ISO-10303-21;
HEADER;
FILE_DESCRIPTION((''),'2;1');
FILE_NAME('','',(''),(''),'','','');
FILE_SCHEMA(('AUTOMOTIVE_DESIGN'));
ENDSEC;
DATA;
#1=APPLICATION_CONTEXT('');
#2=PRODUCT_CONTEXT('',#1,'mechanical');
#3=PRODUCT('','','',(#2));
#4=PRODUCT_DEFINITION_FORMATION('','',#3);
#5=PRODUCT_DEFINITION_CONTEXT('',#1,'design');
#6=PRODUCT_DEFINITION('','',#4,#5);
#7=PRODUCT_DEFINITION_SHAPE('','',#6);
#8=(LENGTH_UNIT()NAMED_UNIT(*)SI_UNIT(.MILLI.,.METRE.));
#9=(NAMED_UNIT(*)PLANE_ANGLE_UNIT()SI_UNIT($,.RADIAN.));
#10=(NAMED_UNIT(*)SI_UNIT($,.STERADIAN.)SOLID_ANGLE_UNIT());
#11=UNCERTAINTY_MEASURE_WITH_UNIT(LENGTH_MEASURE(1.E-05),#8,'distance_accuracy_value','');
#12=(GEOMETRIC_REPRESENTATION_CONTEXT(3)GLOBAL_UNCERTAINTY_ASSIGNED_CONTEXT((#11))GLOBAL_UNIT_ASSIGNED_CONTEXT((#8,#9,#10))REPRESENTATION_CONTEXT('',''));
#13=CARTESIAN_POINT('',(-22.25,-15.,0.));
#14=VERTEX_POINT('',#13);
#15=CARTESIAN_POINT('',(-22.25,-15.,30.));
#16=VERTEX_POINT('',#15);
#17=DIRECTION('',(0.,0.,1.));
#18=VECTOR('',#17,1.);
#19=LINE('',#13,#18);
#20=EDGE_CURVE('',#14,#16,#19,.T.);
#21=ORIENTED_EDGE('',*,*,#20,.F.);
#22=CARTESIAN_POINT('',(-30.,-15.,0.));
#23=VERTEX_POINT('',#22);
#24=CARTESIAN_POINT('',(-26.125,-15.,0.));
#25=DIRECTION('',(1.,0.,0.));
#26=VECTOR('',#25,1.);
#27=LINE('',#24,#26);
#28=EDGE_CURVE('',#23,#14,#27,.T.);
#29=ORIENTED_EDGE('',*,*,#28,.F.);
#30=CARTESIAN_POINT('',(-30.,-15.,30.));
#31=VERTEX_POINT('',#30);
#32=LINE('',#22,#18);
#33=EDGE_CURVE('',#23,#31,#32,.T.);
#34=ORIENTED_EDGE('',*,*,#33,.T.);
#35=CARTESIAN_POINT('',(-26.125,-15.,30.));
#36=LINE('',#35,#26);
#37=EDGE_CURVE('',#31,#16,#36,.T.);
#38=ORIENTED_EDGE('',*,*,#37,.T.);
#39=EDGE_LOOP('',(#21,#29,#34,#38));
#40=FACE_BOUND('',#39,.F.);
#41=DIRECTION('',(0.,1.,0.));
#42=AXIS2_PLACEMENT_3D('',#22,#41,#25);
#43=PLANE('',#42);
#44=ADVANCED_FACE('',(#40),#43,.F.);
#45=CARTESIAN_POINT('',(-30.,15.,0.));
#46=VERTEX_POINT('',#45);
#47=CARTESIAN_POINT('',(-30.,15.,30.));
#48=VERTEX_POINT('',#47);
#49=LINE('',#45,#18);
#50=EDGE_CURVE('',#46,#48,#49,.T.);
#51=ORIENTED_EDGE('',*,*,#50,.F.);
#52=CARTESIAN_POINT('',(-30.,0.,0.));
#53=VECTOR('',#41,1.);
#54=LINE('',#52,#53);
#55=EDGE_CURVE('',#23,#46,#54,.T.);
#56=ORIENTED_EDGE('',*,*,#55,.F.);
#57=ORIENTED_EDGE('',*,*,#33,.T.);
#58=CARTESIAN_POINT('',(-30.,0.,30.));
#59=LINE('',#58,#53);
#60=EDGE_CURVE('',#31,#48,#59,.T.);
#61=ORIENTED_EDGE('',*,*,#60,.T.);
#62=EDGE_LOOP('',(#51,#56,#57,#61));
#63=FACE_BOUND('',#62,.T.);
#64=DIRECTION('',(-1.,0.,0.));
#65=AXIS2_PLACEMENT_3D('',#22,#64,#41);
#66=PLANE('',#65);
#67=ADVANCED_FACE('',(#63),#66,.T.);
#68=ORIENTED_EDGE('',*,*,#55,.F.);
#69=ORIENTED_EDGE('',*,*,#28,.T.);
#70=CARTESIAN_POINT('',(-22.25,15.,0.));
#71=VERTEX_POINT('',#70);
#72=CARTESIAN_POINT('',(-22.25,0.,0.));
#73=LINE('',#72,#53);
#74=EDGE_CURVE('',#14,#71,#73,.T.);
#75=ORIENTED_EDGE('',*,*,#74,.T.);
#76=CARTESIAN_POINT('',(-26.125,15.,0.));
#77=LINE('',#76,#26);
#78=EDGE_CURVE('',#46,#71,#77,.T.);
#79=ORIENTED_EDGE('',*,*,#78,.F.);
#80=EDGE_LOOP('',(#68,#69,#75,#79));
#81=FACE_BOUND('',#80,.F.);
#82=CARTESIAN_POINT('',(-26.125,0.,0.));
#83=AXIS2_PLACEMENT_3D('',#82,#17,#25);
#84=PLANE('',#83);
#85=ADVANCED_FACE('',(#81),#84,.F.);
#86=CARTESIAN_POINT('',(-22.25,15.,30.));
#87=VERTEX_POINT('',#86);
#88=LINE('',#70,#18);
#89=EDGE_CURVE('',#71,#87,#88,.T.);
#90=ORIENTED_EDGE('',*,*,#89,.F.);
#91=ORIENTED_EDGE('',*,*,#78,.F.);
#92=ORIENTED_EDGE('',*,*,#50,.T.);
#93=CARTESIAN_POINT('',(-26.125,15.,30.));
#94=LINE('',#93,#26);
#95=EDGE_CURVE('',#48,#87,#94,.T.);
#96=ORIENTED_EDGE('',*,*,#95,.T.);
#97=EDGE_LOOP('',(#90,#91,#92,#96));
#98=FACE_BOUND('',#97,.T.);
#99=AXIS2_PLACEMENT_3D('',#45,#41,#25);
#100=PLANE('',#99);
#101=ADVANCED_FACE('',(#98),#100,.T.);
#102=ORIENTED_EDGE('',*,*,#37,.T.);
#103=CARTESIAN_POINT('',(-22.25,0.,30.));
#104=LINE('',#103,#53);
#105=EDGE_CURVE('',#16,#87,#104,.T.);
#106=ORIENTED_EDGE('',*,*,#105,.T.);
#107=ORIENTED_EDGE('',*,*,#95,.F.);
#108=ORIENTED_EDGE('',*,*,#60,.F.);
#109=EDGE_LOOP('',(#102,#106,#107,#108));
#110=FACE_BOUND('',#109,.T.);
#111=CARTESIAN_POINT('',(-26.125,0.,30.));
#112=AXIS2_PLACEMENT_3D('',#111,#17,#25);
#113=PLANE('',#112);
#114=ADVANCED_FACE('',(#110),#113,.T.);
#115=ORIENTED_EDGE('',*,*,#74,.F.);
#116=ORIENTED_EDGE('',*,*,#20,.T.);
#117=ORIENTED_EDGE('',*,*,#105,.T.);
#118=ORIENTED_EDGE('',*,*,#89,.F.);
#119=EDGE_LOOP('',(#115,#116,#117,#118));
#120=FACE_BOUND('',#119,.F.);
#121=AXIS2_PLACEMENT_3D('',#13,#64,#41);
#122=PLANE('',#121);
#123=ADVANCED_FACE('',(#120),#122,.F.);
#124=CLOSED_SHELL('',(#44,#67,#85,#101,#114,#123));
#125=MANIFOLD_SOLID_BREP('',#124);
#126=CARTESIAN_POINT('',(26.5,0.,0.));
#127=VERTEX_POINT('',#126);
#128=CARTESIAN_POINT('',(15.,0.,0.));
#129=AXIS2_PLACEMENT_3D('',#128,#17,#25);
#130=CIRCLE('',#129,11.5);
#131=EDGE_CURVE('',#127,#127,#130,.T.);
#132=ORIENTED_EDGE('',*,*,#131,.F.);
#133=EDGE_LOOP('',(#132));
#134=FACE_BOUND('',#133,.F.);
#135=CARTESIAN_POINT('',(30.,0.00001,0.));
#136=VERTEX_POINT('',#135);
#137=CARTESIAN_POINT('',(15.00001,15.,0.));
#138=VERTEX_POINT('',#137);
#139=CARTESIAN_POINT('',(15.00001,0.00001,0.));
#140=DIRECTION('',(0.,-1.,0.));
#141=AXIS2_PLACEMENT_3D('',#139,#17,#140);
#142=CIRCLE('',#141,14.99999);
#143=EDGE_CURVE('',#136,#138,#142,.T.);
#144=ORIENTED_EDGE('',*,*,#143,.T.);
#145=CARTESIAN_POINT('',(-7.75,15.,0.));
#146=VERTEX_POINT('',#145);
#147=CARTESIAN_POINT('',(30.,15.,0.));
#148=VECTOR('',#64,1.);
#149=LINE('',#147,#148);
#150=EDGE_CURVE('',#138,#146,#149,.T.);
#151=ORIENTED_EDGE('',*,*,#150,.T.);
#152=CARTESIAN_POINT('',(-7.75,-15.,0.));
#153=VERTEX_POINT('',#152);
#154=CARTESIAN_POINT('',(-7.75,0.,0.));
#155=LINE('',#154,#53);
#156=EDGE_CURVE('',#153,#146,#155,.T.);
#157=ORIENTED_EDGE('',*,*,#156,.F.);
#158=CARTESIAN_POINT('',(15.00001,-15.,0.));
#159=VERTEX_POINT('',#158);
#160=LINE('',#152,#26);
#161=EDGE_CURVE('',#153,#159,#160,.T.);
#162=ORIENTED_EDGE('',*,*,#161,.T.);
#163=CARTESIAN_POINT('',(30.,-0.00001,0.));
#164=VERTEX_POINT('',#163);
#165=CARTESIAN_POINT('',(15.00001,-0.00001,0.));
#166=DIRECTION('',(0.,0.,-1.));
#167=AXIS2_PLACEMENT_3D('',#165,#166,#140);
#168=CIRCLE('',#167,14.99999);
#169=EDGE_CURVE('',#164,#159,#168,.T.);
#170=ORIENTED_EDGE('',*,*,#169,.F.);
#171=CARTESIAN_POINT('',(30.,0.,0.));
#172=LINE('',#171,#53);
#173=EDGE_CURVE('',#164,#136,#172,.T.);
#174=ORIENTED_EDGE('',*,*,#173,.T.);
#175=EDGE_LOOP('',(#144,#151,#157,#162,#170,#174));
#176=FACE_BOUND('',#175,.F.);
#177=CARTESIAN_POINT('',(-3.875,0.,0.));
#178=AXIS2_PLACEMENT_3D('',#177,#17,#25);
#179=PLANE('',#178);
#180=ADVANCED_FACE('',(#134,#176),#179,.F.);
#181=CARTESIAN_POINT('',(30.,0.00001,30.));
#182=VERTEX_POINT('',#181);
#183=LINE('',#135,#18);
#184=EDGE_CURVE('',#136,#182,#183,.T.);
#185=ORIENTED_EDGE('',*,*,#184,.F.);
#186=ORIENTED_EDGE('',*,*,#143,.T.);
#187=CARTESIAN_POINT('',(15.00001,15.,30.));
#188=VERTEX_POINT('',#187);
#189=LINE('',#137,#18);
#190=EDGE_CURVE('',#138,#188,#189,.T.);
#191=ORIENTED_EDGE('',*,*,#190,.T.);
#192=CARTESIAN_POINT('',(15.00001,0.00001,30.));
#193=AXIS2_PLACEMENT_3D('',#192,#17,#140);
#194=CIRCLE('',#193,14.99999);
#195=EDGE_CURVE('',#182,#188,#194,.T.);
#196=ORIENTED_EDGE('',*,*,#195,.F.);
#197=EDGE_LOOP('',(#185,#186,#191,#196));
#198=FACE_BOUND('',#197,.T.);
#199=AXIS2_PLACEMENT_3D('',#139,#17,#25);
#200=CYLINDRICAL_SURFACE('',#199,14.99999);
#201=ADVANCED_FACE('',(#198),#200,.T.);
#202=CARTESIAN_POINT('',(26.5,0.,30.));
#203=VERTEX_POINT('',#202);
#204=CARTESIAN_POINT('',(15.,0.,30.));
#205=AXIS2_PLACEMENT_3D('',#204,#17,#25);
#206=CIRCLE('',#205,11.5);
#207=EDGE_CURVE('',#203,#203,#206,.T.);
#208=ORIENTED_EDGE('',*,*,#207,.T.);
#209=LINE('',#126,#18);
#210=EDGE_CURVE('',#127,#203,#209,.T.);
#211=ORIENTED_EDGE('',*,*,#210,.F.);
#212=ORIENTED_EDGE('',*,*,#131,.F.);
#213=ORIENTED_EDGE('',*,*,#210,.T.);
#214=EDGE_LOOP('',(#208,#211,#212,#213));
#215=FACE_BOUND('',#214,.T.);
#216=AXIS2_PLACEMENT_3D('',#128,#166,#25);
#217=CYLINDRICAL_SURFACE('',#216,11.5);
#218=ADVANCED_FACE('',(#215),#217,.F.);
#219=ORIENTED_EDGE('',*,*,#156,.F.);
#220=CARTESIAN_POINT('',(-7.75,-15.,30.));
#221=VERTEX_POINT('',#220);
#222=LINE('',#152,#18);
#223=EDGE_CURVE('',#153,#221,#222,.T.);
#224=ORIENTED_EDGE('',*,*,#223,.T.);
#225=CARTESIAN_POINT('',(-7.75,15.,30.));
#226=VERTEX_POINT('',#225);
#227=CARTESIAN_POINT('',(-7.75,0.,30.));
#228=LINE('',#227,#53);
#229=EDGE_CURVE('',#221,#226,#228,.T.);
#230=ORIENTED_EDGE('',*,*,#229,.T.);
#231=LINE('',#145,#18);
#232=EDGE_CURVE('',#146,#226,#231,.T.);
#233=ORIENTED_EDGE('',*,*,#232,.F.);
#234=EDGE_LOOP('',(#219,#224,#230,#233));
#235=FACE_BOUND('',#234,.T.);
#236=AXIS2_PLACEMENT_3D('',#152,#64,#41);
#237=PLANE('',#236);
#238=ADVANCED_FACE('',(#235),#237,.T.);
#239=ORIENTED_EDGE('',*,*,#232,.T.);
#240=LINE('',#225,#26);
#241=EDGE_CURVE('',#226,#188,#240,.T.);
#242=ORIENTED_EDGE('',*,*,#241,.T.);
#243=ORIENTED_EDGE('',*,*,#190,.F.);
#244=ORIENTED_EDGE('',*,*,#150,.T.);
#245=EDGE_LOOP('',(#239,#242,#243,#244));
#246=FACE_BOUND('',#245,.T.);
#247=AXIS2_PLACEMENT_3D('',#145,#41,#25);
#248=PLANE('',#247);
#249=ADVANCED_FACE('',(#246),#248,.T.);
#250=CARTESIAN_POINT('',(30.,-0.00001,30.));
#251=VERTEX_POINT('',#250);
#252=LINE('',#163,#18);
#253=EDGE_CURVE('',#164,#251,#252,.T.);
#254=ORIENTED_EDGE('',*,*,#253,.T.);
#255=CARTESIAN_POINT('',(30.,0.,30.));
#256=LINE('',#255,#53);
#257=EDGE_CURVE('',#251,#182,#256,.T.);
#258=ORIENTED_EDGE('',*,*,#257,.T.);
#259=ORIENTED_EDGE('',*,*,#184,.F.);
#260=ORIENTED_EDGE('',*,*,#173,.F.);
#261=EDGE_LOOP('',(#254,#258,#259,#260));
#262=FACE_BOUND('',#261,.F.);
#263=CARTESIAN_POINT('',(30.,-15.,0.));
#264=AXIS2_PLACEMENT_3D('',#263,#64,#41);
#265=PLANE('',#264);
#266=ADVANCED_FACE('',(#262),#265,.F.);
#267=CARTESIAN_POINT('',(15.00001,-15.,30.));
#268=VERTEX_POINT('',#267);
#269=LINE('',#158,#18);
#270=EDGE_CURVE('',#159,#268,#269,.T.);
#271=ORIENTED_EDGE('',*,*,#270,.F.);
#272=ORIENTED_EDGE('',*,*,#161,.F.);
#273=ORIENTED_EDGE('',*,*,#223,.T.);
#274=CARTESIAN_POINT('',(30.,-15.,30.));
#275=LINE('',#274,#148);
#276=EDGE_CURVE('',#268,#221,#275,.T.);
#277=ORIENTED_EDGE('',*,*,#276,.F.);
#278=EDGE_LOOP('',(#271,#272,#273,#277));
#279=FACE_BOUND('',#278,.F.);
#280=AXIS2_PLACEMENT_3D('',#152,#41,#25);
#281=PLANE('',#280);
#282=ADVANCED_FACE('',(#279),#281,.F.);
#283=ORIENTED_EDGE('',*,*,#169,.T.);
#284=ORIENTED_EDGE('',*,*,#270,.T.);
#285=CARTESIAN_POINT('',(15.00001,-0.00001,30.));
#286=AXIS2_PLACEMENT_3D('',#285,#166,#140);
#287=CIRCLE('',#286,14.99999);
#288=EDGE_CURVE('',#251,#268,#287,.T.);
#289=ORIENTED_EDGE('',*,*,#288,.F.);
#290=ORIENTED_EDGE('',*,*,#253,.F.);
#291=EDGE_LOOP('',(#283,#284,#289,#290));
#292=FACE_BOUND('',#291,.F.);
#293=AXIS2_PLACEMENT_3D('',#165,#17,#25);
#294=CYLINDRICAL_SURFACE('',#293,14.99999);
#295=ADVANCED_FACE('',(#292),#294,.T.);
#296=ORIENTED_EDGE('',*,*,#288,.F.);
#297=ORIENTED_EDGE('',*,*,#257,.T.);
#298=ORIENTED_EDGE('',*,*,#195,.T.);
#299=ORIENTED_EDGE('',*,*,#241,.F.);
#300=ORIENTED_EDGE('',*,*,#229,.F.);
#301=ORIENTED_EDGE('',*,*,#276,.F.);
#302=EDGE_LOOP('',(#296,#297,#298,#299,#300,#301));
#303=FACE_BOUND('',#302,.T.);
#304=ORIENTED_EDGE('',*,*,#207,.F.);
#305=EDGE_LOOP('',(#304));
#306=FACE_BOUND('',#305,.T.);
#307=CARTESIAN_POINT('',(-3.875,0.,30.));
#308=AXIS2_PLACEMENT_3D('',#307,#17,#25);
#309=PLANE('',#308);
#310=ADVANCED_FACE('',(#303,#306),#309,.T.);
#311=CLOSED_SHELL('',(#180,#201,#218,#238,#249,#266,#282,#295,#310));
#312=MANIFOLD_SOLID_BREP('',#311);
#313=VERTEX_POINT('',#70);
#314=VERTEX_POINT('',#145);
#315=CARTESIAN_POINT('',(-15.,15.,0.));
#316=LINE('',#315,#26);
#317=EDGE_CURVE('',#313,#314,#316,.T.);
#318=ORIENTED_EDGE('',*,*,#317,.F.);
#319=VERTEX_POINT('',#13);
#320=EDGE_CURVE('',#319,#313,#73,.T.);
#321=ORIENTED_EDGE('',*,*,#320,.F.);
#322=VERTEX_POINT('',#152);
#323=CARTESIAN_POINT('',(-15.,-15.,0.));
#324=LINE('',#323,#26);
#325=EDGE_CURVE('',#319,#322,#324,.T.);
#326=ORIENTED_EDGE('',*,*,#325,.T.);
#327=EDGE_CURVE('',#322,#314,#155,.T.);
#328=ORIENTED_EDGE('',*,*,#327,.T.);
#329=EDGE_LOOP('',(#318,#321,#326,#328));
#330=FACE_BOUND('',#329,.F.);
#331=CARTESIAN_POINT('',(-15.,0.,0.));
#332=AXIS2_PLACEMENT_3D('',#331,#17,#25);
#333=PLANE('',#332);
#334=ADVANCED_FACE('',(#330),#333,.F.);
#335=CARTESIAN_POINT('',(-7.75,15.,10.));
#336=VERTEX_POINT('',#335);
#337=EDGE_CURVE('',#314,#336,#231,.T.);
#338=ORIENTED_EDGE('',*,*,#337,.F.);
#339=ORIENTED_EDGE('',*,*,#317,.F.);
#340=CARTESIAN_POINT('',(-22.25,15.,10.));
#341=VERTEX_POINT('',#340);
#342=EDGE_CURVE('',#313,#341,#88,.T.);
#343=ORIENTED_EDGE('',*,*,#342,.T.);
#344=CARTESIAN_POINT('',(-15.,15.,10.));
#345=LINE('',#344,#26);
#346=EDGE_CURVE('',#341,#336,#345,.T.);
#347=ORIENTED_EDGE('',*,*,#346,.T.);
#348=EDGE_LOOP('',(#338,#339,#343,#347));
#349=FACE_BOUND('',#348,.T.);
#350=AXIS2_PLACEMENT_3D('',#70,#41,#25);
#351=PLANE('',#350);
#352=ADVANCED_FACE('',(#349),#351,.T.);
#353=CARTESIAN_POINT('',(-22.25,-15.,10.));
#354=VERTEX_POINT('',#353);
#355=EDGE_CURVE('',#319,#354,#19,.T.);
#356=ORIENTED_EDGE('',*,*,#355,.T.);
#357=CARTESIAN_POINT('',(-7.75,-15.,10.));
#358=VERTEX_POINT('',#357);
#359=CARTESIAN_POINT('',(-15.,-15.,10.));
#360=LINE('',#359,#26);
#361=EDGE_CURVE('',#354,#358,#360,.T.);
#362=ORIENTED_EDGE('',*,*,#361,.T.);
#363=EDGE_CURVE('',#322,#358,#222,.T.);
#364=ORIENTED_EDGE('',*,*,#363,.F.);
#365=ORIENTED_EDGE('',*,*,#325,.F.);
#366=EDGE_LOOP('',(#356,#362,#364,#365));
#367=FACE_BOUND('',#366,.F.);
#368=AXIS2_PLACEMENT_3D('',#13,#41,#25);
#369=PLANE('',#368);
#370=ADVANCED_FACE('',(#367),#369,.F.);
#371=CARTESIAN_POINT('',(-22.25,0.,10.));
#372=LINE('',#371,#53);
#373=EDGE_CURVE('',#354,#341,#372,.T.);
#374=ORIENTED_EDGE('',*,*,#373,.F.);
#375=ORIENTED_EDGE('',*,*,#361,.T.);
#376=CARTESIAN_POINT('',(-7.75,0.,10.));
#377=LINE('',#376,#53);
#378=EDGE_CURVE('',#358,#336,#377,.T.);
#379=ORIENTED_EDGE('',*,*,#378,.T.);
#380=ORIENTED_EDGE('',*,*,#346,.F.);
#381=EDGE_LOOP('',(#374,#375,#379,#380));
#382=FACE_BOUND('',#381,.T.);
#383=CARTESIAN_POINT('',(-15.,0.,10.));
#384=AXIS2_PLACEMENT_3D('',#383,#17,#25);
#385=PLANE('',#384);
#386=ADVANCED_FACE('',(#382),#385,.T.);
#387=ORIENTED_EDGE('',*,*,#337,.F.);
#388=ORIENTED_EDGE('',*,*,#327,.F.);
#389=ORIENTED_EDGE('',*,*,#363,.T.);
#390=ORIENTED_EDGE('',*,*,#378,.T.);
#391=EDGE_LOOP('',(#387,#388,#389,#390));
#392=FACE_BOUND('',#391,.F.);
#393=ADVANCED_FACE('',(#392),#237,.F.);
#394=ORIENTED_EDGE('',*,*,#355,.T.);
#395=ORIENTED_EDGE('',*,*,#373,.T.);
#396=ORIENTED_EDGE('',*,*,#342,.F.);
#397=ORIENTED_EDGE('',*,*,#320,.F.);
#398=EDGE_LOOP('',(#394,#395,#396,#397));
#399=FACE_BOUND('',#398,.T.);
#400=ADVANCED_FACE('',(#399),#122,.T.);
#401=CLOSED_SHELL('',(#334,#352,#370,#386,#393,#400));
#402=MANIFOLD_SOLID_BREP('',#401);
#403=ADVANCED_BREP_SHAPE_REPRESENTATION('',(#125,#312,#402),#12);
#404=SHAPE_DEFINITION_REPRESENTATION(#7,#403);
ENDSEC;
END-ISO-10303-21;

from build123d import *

# Parameters (mm, degrees)
F0_W     = 30
F0_H     = 30
F0_R     = 11.5
F1_DEPTH = 30
F0_W_2   = 7.75
F2_DEPTH = 30
F0_W_3   = 14.5
F3_DEPTH = 10
F4_R     = 14.99999


# Not quite as in the source:
# - a fillet or chamfer is up to 0.001 mm smaller than in the source, because OpenCascade refuses the exact size


with BuildPart() as f1:
    # F0 (on Top) → F1 (new body)
    with BuildSketch(Plane.XY):
        with Locations((15, 0)):
            Rectangle(F0_W, F0_H)
        with Locations((15, 0)):
            Circle(F0_R, mode=Mode.SUBTRACT)
    extrude(amount=F1_DEPTH)

    # F0 (on Top) → F2, piece 2 (join)
    with BuildSketch(Plane.XY):
        with Locations((-3.875, 0)):
            Rectangle(F0_W_2, F0_H)
    extrude(amount=F2_DEPTH)

    # F4 (radius 15 in the source; OpenCascade refuses exactly that, so slightly less here)
    f4_edges = [f1.edges().sort_by_distance(p)[0] for p in [
        (30, -15, 15),
        (30, 15, 15),
    ]]
    fillet(f4_edges, radius=F4_R)


with BuildPart() as f2:
    # F0 (on Top) → F2 (new body)
    with BuildSketch(Plane.XY):
        with Locations((-26.125, 0)):
            Rectangle(F0_W_2, F0_H)
    extrude(amount=F2_DEPTH)


with BuildPart() as f3:
    # F0 (on Top) → F3 (new body)
    with BuildSketch(Plane.XY):
        with Locations((-15, 0)):
            Rectangle(F0_W_3, F0_H)
    extrude(amount=F3_DEPTH)


solid = Compound([f1.part, f2.part, f3.part])
